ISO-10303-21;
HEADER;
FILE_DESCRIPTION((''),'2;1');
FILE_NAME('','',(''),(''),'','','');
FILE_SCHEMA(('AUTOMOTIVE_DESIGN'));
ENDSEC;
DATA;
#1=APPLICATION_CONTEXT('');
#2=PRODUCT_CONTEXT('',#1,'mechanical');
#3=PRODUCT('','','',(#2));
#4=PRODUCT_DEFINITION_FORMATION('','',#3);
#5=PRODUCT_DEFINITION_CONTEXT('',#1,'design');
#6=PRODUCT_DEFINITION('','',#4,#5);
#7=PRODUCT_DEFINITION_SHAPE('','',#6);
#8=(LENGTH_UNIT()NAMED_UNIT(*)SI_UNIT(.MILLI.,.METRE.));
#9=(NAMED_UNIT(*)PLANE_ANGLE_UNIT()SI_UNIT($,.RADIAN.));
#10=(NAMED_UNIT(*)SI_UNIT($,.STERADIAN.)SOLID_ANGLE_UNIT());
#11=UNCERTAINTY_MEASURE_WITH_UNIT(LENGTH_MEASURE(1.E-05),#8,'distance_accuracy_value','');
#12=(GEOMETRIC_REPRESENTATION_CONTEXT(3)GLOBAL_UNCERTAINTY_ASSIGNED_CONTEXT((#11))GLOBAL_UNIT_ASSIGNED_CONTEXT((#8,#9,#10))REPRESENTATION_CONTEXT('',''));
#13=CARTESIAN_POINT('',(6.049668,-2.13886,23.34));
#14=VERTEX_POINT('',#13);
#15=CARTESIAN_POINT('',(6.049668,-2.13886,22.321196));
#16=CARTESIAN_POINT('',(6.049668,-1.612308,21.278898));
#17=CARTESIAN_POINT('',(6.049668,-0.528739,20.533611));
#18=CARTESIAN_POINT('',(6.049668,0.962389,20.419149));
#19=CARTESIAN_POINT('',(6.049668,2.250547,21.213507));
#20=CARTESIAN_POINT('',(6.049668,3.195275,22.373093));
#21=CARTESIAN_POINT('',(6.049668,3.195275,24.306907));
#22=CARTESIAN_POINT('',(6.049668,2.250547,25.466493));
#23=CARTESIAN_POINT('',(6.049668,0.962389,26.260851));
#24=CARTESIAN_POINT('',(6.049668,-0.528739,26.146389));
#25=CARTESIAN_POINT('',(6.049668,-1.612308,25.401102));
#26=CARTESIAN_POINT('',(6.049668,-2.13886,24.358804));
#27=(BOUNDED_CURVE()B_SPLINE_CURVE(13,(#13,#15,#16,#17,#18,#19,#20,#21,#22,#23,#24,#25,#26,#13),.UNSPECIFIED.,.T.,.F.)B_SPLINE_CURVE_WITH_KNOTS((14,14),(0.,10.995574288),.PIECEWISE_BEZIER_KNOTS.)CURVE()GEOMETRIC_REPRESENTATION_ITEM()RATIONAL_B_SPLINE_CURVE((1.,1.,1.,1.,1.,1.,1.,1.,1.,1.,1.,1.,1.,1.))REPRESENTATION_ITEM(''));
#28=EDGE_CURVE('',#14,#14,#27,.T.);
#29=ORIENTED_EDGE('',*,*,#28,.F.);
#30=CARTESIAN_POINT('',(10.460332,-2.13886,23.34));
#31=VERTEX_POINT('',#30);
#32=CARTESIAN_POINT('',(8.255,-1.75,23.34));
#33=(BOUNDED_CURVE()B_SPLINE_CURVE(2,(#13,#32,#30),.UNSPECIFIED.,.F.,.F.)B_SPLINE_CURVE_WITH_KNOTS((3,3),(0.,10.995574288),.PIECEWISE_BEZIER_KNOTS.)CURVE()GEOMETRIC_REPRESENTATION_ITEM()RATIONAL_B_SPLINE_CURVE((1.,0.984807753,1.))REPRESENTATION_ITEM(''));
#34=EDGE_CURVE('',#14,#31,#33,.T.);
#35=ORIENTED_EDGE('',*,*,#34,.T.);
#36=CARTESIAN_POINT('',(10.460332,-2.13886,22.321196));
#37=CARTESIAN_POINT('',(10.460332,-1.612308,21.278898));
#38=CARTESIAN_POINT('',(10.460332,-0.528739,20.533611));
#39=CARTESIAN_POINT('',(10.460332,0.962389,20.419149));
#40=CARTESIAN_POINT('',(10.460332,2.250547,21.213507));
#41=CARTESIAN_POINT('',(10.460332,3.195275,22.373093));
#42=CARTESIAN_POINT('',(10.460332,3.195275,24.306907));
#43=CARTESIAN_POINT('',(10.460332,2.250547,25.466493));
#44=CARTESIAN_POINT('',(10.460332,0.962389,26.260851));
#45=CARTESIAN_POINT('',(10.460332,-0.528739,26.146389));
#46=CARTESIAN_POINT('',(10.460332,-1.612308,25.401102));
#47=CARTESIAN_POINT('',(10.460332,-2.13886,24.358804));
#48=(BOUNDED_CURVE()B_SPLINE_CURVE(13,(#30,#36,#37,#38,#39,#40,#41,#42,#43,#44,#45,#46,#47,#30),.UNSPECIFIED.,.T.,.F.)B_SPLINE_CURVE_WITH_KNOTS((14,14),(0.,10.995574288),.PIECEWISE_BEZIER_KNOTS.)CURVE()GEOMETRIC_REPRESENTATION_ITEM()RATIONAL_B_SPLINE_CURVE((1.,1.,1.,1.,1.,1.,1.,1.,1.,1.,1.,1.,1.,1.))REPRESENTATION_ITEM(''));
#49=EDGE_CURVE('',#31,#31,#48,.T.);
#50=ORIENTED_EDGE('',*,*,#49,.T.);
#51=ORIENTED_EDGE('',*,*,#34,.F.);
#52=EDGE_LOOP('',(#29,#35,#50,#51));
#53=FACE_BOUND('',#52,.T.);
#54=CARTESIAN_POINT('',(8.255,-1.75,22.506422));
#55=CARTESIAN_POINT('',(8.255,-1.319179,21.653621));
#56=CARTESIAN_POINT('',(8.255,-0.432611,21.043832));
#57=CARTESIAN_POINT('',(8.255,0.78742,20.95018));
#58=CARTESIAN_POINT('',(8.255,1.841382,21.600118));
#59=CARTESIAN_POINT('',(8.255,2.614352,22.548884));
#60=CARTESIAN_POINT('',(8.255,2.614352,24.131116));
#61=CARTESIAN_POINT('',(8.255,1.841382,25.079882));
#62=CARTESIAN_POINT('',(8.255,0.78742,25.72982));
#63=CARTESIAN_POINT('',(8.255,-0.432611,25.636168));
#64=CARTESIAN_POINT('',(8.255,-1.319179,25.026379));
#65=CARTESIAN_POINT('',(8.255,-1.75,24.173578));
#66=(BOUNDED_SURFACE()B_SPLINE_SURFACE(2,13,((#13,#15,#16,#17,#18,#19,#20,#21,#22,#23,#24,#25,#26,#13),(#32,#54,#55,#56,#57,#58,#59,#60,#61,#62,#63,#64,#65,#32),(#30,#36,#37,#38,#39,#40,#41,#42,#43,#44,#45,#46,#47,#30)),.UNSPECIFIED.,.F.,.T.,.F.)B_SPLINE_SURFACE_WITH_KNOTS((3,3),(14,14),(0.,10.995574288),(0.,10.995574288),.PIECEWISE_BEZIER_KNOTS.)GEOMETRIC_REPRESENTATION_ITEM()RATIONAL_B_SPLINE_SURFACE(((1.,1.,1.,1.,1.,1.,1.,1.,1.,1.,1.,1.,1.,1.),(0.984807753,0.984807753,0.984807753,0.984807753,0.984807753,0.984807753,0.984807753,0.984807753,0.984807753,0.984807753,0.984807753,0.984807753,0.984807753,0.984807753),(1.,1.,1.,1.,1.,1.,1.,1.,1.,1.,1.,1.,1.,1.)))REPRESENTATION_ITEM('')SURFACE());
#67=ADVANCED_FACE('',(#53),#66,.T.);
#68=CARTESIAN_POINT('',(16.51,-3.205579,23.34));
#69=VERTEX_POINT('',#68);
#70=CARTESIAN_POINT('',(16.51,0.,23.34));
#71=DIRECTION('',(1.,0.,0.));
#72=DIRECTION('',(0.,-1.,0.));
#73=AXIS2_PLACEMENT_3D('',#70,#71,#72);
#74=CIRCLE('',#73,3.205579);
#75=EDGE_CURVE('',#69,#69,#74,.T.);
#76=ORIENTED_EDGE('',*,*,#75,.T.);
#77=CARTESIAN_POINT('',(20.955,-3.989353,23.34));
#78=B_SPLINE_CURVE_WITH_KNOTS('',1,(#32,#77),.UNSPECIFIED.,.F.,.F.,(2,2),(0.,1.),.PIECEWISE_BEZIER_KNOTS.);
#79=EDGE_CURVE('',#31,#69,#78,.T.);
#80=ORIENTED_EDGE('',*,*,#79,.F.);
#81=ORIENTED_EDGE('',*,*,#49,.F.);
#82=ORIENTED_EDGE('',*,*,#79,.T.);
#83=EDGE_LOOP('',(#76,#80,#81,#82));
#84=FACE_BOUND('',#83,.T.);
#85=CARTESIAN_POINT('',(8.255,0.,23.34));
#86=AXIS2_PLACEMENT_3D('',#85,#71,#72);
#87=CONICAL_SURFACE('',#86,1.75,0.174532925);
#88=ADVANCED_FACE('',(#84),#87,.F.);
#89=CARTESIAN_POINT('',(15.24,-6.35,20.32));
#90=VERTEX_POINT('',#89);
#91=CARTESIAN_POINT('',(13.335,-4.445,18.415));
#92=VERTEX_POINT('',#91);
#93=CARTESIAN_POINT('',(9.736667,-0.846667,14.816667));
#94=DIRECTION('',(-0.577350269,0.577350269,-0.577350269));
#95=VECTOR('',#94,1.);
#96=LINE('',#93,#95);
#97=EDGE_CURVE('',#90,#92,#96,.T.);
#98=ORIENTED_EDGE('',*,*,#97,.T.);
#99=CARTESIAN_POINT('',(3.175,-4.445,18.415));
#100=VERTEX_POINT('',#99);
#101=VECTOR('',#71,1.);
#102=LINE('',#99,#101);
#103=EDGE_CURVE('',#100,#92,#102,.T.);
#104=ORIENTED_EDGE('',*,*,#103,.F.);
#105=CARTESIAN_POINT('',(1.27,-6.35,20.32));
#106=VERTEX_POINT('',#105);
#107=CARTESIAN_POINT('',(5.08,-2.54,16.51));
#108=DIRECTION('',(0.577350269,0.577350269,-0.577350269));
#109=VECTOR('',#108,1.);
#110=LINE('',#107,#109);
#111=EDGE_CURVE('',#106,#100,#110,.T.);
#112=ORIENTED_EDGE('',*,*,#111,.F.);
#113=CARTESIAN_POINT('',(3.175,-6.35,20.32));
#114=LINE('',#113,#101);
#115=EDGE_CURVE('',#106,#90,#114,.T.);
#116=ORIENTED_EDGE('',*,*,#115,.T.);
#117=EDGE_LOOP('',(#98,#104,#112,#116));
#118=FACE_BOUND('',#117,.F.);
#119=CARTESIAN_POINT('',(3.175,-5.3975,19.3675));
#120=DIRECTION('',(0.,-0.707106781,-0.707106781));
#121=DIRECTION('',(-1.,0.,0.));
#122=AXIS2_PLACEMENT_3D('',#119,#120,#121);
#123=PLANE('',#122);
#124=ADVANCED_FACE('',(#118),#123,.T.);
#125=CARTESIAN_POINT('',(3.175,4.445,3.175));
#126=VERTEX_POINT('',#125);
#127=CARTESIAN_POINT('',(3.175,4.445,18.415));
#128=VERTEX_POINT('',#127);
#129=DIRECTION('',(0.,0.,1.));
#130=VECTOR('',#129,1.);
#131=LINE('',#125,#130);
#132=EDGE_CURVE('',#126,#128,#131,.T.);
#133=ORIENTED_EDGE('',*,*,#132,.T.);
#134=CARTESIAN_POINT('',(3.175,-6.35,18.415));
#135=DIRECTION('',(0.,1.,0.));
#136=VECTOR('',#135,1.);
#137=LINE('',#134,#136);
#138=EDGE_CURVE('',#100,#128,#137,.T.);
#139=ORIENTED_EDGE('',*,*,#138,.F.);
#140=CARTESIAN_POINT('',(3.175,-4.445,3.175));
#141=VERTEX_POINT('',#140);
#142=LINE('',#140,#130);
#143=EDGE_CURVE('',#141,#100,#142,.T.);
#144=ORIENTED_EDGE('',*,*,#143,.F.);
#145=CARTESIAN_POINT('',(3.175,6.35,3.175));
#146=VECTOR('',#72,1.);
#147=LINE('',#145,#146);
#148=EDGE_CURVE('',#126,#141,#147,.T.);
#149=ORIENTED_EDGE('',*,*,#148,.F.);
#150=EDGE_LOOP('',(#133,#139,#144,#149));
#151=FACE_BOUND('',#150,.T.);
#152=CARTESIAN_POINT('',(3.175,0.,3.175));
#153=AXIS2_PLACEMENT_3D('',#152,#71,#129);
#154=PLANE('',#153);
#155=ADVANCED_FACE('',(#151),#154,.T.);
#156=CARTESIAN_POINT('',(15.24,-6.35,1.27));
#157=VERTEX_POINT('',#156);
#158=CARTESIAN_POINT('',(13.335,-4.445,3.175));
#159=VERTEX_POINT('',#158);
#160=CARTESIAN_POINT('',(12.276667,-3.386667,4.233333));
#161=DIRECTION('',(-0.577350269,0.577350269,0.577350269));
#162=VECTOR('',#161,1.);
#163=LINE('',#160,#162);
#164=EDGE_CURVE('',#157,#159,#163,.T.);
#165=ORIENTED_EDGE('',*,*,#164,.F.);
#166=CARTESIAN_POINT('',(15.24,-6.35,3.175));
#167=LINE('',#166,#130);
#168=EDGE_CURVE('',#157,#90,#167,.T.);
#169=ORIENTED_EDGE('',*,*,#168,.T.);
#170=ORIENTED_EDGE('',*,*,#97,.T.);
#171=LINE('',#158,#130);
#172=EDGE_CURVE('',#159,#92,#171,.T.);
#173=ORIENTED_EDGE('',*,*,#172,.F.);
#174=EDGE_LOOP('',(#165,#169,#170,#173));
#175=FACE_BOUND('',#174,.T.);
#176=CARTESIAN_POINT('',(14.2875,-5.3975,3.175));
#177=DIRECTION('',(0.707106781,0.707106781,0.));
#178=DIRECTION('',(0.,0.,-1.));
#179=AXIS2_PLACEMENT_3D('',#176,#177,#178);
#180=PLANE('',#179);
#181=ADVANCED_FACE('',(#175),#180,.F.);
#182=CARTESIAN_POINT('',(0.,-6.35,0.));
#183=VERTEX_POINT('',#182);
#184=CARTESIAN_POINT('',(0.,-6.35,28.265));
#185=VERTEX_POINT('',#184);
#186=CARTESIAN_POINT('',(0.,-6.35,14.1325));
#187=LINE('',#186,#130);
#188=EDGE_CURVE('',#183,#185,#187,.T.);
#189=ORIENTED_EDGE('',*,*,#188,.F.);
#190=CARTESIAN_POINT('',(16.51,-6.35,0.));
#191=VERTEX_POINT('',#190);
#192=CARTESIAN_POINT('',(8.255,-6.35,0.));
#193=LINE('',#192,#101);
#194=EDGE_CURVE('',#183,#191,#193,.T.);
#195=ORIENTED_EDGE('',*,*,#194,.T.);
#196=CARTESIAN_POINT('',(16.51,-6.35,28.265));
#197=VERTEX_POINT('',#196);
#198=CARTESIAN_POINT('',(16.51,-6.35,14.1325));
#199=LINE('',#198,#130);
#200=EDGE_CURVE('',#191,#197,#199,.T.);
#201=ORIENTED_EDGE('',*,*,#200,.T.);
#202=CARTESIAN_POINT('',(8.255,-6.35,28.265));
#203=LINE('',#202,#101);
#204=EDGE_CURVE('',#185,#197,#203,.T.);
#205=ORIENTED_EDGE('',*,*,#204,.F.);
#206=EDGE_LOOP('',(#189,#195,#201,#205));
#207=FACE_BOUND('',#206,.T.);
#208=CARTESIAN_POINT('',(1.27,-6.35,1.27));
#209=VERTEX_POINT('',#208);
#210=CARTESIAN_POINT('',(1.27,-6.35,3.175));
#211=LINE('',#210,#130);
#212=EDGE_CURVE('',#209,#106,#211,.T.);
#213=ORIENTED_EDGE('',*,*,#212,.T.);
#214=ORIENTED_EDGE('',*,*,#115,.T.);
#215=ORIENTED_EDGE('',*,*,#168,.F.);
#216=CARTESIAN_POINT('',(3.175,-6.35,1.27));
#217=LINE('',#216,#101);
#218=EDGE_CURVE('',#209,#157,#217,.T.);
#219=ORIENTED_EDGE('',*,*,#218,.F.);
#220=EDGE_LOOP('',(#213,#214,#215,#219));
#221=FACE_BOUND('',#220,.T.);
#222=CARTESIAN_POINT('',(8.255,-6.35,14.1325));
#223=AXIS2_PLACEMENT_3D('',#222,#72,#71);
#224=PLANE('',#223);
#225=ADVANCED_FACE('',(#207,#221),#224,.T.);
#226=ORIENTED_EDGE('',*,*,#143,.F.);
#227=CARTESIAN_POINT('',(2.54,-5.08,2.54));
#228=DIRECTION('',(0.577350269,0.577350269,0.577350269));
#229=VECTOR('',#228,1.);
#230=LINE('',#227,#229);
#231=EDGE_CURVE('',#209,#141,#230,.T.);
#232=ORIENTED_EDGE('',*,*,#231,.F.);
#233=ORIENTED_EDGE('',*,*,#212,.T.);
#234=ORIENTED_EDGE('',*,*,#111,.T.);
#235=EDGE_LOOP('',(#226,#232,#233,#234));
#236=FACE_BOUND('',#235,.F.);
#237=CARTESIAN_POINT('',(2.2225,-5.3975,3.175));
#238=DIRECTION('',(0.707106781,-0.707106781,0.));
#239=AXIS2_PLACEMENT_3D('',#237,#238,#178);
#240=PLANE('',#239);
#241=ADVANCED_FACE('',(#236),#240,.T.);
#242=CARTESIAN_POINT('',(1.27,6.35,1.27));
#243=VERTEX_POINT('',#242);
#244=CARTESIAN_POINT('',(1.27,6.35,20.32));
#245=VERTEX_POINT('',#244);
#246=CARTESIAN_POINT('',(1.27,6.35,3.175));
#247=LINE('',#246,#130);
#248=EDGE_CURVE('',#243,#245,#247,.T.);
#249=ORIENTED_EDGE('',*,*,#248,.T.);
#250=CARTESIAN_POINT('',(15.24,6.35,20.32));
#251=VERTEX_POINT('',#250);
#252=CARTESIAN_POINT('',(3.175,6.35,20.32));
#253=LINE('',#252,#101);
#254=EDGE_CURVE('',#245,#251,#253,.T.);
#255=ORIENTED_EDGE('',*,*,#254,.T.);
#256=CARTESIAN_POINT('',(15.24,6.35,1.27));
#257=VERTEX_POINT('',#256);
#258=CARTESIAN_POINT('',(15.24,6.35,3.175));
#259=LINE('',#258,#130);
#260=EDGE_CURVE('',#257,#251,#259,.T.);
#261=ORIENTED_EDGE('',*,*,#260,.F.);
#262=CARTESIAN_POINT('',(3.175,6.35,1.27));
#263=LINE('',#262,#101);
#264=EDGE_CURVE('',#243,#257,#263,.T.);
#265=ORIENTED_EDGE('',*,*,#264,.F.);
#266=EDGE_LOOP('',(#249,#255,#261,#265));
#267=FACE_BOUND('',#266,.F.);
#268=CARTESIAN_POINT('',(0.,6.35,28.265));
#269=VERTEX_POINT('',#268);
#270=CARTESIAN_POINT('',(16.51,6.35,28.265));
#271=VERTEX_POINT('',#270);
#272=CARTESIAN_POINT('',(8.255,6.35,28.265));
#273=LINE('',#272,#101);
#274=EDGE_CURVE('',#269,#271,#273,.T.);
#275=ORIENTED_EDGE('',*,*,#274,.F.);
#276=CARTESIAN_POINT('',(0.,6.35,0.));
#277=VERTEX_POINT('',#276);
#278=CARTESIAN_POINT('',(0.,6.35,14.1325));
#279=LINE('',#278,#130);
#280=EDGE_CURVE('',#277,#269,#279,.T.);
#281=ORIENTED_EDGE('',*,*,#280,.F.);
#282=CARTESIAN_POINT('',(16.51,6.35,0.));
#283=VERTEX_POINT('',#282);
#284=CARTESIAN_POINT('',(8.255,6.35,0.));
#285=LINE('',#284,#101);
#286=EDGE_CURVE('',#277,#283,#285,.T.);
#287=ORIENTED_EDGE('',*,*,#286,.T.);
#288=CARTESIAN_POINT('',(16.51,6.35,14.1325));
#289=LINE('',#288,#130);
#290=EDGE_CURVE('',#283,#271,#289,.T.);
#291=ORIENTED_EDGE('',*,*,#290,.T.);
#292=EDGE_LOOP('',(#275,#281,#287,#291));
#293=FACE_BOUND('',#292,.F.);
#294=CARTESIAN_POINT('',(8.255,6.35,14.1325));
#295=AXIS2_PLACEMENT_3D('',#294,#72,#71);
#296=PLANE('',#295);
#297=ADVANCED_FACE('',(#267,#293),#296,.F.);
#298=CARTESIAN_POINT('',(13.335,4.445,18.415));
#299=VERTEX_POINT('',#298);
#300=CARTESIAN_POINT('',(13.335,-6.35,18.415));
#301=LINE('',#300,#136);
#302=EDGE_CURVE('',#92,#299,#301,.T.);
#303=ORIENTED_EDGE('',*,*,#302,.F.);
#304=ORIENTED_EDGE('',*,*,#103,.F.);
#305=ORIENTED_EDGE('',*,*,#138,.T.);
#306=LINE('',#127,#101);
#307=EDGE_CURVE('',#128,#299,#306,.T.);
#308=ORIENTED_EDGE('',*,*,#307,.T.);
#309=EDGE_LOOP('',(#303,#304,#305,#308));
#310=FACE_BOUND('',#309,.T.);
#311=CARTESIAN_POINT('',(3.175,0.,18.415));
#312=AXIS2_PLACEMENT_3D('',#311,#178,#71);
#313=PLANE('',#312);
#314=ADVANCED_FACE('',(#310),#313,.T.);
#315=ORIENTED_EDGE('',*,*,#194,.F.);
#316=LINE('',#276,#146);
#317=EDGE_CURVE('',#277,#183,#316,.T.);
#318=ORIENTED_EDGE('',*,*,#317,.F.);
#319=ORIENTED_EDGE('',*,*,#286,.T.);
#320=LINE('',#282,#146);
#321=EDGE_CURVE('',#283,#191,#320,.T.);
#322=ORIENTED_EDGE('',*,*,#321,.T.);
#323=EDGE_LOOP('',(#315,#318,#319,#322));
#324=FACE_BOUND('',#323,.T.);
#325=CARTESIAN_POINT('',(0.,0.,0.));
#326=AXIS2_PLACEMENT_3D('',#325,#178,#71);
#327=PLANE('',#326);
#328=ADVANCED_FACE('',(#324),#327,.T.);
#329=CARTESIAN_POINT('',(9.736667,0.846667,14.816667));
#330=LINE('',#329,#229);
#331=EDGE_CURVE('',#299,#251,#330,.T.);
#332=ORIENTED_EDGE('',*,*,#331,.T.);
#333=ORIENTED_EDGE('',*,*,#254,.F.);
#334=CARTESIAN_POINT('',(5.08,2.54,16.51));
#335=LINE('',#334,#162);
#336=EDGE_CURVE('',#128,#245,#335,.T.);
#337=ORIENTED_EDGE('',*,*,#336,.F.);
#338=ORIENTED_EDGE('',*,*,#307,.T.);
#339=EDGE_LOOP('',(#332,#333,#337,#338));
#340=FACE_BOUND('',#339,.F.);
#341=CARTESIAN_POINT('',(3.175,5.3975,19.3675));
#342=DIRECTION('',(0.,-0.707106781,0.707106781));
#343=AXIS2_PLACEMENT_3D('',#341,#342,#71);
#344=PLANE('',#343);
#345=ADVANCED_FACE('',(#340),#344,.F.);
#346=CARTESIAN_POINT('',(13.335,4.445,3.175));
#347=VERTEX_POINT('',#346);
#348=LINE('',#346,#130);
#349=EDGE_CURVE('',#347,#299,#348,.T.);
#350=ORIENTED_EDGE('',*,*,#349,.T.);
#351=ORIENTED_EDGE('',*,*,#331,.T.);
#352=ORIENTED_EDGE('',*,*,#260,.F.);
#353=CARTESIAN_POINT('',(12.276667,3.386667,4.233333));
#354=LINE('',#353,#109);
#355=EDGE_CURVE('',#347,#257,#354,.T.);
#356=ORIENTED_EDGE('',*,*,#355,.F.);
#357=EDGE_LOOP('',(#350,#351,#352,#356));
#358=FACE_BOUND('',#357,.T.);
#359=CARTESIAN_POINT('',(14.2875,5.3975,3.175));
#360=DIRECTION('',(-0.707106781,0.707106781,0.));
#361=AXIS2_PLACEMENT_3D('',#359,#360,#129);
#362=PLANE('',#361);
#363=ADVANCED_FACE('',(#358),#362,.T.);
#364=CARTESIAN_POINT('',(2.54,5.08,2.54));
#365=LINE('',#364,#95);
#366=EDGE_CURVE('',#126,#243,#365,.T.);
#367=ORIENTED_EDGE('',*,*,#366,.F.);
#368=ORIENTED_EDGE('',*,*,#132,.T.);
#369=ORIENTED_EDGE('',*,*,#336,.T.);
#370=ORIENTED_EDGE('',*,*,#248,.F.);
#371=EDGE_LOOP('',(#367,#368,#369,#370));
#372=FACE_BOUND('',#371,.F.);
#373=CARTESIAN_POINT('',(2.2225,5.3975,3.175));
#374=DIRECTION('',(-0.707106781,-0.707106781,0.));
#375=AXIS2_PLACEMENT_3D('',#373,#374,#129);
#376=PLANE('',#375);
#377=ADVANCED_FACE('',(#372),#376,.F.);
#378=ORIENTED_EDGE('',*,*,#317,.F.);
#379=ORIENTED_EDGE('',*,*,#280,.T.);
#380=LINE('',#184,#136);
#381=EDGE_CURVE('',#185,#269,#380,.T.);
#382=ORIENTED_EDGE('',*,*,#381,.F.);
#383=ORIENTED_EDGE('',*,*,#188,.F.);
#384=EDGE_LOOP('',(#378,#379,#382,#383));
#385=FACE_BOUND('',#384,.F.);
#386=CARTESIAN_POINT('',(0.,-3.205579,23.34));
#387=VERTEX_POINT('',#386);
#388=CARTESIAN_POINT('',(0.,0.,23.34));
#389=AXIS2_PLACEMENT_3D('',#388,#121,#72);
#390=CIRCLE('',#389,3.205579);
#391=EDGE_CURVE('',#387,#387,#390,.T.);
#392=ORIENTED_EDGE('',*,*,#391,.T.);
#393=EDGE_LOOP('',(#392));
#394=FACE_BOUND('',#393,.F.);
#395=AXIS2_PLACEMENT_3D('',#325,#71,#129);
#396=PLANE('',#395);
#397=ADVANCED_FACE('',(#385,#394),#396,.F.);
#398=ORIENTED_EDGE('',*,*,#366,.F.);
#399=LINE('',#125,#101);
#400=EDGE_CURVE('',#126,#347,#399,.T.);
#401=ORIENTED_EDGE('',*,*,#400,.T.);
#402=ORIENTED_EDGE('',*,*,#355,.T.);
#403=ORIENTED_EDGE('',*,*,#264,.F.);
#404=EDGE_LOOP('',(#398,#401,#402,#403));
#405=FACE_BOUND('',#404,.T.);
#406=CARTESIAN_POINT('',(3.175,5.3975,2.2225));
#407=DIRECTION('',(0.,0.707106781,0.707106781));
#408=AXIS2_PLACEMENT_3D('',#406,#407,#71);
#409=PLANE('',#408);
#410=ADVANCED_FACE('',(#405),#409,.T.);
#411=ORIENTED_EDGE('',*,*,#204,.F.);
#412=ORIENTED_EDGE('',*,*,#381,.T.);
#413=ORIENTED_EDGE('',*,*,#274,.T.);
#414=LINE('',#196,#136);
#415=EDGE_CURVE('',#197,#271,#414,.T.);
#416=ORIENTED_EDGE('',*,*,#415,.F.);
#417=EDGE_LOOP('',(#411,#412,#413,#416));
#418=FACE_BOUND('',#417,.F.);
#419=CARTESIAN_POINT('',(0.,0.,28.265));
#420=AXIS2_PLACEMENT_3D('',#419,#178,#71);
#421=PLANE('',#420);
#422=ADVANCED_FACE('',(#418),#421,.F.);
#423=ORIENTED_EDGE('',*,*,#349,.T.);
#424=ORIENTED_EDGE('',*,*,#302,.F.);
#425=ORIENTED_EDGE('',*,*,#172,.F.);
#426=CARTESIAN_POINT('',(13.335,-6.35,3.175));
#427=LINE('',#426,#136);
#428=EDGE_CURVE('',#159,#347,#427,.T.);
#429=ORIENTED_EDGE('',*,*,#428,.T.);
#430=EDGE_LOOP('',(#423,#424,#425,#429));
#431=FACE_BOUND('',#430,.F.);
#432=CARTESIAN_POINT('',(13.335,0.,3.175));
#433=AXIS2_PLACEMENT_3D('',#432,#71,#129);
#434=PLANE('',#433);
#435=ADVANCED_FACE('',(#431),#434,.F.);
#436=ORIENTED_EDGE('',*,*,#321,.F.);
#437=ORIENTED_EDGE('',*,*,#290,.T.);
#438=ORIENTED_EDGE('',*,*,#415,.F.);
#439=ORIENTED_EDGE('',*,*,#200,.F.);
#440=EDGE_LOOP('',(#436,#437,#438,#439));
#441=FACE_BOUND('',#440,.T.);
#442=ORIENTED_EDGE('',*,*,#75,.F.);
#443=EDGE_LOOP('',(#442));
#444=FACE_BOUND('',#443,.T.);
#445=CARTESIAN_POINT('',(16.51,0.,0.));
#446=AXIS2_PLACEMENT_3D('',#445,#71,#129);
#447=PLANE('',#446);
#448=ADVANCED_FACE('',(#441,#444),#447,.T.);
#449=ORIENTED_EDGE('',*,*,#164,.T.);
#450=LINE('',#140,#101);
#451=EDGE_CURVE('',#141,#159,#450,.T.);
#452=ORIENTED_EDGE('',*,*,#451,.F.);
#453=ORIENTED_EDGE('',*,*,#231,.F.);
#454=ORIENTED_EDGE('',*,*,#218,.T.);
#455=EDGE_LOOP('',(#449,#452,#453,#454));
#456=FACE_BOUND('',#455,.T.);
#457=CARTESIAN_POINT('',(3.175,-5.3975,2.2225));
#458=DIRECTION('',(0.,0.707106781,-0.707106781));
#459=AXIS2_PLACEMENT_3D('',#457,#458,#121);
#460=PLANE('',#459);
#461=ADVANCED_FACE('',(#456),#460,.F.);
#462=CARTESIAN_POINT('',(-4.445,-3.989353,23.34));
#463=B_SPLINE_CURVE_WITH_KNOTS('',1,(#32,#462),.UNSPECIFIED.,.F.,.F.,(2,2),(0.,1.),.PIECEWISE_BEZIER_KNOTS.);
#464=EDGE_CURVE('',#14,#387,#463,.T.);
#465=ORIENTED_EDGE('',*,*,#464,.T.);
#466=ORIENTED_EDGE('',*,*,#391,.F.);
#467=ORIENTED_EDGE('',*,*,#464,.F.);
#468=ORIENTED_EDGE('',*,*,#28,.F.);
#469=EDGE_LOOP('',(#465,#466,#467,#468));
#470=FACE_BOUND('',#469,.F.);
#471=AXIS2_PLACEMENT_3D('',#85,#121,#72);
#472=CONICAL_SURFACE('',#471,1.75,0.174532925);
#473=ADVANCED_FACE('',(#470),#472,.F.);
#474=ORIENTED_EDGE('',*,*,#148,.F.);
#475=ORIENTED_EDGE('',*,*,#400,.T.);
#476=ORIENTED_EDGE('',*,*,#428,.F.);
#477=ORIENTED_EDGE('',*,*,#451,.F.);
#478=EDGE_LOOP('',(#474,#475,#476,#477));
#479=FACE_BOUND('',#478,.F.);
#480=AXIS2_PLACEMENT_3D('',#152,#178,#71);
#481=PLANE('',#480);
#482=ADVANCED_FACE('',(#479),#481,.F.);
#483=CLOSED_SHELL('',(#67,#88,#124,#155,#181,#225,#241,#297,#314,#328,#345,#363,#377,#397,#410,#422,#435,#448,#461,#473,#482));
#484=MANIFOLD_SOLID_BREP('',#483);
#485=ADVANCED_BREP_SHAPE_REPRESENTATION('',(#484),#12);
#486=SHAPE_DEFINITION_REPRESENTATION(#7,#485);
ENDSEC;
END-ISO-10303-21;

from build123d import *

# Parameters (mm, degrees)
F0_W     = 16.51
F0_H     = 28.265
F0_W_2   = 10.16
F0_H_2   = 15.24
F1_DEPTH = 6.35
F2_SIZE  = 1.905
F4_R     = 1.75
F5_DEPTH = 12.7
F5_TAPER = -10
F6_R     = 12.7


with BuildPart() as f1:
    # F0 (on Front) → F1 (new body, symmetric)
    with BuildSketch(Plane.XZ):
        with Locations((8.255, 14.1325)):
            Rectangle(F0_W, F0_H)
        with Locations((8.255, 10.795)):
            Rectangle(F0_W_2, F0_H_2, mode=Mode.SUBTRACT)
    extrude(amount=F1_DEPTH, both=True)

    # F2
    f2_edges = [f1.edges().sort_by_distance(p)[0] for p in [
        (13.335, -6.35, 10.795),
        (8.255, -6.35, 18.415),
        (3.175, -6.35, 10.795),
        (8.255, -6.35, 3.175),
        (3.175, 6.35, 10.795),
        (8.255, 6.35, 18.415),
        (8.255, 6.35, 3.175),
        (13.335, 6.35, 10.795),
    ]]
    chamfer(f2_edges, length=F2_SIZE)

    # F4 (on mid) → F5 (cut, symmetric)
    with BuildSketch(Plane(origin=(8.255, 0, 0), x_dir=(0, -1, 0), z_dir=(-1, 0, 0))):
        with Locations((0, 23.34)):
            Circle(F4_R)
    extrude(amount=F5_DEPTH, both=True, taper=F5_TAPER, mode=Mode.SUBTRACT)

    # F6
    f6_edges = [f1.edges().sort_by_distance(p)[0] for p in [
        (8.255, 1.75, 23.34),
    ]]
    fillet(f6_edges, radius=F6_R)


solid = f1.part
